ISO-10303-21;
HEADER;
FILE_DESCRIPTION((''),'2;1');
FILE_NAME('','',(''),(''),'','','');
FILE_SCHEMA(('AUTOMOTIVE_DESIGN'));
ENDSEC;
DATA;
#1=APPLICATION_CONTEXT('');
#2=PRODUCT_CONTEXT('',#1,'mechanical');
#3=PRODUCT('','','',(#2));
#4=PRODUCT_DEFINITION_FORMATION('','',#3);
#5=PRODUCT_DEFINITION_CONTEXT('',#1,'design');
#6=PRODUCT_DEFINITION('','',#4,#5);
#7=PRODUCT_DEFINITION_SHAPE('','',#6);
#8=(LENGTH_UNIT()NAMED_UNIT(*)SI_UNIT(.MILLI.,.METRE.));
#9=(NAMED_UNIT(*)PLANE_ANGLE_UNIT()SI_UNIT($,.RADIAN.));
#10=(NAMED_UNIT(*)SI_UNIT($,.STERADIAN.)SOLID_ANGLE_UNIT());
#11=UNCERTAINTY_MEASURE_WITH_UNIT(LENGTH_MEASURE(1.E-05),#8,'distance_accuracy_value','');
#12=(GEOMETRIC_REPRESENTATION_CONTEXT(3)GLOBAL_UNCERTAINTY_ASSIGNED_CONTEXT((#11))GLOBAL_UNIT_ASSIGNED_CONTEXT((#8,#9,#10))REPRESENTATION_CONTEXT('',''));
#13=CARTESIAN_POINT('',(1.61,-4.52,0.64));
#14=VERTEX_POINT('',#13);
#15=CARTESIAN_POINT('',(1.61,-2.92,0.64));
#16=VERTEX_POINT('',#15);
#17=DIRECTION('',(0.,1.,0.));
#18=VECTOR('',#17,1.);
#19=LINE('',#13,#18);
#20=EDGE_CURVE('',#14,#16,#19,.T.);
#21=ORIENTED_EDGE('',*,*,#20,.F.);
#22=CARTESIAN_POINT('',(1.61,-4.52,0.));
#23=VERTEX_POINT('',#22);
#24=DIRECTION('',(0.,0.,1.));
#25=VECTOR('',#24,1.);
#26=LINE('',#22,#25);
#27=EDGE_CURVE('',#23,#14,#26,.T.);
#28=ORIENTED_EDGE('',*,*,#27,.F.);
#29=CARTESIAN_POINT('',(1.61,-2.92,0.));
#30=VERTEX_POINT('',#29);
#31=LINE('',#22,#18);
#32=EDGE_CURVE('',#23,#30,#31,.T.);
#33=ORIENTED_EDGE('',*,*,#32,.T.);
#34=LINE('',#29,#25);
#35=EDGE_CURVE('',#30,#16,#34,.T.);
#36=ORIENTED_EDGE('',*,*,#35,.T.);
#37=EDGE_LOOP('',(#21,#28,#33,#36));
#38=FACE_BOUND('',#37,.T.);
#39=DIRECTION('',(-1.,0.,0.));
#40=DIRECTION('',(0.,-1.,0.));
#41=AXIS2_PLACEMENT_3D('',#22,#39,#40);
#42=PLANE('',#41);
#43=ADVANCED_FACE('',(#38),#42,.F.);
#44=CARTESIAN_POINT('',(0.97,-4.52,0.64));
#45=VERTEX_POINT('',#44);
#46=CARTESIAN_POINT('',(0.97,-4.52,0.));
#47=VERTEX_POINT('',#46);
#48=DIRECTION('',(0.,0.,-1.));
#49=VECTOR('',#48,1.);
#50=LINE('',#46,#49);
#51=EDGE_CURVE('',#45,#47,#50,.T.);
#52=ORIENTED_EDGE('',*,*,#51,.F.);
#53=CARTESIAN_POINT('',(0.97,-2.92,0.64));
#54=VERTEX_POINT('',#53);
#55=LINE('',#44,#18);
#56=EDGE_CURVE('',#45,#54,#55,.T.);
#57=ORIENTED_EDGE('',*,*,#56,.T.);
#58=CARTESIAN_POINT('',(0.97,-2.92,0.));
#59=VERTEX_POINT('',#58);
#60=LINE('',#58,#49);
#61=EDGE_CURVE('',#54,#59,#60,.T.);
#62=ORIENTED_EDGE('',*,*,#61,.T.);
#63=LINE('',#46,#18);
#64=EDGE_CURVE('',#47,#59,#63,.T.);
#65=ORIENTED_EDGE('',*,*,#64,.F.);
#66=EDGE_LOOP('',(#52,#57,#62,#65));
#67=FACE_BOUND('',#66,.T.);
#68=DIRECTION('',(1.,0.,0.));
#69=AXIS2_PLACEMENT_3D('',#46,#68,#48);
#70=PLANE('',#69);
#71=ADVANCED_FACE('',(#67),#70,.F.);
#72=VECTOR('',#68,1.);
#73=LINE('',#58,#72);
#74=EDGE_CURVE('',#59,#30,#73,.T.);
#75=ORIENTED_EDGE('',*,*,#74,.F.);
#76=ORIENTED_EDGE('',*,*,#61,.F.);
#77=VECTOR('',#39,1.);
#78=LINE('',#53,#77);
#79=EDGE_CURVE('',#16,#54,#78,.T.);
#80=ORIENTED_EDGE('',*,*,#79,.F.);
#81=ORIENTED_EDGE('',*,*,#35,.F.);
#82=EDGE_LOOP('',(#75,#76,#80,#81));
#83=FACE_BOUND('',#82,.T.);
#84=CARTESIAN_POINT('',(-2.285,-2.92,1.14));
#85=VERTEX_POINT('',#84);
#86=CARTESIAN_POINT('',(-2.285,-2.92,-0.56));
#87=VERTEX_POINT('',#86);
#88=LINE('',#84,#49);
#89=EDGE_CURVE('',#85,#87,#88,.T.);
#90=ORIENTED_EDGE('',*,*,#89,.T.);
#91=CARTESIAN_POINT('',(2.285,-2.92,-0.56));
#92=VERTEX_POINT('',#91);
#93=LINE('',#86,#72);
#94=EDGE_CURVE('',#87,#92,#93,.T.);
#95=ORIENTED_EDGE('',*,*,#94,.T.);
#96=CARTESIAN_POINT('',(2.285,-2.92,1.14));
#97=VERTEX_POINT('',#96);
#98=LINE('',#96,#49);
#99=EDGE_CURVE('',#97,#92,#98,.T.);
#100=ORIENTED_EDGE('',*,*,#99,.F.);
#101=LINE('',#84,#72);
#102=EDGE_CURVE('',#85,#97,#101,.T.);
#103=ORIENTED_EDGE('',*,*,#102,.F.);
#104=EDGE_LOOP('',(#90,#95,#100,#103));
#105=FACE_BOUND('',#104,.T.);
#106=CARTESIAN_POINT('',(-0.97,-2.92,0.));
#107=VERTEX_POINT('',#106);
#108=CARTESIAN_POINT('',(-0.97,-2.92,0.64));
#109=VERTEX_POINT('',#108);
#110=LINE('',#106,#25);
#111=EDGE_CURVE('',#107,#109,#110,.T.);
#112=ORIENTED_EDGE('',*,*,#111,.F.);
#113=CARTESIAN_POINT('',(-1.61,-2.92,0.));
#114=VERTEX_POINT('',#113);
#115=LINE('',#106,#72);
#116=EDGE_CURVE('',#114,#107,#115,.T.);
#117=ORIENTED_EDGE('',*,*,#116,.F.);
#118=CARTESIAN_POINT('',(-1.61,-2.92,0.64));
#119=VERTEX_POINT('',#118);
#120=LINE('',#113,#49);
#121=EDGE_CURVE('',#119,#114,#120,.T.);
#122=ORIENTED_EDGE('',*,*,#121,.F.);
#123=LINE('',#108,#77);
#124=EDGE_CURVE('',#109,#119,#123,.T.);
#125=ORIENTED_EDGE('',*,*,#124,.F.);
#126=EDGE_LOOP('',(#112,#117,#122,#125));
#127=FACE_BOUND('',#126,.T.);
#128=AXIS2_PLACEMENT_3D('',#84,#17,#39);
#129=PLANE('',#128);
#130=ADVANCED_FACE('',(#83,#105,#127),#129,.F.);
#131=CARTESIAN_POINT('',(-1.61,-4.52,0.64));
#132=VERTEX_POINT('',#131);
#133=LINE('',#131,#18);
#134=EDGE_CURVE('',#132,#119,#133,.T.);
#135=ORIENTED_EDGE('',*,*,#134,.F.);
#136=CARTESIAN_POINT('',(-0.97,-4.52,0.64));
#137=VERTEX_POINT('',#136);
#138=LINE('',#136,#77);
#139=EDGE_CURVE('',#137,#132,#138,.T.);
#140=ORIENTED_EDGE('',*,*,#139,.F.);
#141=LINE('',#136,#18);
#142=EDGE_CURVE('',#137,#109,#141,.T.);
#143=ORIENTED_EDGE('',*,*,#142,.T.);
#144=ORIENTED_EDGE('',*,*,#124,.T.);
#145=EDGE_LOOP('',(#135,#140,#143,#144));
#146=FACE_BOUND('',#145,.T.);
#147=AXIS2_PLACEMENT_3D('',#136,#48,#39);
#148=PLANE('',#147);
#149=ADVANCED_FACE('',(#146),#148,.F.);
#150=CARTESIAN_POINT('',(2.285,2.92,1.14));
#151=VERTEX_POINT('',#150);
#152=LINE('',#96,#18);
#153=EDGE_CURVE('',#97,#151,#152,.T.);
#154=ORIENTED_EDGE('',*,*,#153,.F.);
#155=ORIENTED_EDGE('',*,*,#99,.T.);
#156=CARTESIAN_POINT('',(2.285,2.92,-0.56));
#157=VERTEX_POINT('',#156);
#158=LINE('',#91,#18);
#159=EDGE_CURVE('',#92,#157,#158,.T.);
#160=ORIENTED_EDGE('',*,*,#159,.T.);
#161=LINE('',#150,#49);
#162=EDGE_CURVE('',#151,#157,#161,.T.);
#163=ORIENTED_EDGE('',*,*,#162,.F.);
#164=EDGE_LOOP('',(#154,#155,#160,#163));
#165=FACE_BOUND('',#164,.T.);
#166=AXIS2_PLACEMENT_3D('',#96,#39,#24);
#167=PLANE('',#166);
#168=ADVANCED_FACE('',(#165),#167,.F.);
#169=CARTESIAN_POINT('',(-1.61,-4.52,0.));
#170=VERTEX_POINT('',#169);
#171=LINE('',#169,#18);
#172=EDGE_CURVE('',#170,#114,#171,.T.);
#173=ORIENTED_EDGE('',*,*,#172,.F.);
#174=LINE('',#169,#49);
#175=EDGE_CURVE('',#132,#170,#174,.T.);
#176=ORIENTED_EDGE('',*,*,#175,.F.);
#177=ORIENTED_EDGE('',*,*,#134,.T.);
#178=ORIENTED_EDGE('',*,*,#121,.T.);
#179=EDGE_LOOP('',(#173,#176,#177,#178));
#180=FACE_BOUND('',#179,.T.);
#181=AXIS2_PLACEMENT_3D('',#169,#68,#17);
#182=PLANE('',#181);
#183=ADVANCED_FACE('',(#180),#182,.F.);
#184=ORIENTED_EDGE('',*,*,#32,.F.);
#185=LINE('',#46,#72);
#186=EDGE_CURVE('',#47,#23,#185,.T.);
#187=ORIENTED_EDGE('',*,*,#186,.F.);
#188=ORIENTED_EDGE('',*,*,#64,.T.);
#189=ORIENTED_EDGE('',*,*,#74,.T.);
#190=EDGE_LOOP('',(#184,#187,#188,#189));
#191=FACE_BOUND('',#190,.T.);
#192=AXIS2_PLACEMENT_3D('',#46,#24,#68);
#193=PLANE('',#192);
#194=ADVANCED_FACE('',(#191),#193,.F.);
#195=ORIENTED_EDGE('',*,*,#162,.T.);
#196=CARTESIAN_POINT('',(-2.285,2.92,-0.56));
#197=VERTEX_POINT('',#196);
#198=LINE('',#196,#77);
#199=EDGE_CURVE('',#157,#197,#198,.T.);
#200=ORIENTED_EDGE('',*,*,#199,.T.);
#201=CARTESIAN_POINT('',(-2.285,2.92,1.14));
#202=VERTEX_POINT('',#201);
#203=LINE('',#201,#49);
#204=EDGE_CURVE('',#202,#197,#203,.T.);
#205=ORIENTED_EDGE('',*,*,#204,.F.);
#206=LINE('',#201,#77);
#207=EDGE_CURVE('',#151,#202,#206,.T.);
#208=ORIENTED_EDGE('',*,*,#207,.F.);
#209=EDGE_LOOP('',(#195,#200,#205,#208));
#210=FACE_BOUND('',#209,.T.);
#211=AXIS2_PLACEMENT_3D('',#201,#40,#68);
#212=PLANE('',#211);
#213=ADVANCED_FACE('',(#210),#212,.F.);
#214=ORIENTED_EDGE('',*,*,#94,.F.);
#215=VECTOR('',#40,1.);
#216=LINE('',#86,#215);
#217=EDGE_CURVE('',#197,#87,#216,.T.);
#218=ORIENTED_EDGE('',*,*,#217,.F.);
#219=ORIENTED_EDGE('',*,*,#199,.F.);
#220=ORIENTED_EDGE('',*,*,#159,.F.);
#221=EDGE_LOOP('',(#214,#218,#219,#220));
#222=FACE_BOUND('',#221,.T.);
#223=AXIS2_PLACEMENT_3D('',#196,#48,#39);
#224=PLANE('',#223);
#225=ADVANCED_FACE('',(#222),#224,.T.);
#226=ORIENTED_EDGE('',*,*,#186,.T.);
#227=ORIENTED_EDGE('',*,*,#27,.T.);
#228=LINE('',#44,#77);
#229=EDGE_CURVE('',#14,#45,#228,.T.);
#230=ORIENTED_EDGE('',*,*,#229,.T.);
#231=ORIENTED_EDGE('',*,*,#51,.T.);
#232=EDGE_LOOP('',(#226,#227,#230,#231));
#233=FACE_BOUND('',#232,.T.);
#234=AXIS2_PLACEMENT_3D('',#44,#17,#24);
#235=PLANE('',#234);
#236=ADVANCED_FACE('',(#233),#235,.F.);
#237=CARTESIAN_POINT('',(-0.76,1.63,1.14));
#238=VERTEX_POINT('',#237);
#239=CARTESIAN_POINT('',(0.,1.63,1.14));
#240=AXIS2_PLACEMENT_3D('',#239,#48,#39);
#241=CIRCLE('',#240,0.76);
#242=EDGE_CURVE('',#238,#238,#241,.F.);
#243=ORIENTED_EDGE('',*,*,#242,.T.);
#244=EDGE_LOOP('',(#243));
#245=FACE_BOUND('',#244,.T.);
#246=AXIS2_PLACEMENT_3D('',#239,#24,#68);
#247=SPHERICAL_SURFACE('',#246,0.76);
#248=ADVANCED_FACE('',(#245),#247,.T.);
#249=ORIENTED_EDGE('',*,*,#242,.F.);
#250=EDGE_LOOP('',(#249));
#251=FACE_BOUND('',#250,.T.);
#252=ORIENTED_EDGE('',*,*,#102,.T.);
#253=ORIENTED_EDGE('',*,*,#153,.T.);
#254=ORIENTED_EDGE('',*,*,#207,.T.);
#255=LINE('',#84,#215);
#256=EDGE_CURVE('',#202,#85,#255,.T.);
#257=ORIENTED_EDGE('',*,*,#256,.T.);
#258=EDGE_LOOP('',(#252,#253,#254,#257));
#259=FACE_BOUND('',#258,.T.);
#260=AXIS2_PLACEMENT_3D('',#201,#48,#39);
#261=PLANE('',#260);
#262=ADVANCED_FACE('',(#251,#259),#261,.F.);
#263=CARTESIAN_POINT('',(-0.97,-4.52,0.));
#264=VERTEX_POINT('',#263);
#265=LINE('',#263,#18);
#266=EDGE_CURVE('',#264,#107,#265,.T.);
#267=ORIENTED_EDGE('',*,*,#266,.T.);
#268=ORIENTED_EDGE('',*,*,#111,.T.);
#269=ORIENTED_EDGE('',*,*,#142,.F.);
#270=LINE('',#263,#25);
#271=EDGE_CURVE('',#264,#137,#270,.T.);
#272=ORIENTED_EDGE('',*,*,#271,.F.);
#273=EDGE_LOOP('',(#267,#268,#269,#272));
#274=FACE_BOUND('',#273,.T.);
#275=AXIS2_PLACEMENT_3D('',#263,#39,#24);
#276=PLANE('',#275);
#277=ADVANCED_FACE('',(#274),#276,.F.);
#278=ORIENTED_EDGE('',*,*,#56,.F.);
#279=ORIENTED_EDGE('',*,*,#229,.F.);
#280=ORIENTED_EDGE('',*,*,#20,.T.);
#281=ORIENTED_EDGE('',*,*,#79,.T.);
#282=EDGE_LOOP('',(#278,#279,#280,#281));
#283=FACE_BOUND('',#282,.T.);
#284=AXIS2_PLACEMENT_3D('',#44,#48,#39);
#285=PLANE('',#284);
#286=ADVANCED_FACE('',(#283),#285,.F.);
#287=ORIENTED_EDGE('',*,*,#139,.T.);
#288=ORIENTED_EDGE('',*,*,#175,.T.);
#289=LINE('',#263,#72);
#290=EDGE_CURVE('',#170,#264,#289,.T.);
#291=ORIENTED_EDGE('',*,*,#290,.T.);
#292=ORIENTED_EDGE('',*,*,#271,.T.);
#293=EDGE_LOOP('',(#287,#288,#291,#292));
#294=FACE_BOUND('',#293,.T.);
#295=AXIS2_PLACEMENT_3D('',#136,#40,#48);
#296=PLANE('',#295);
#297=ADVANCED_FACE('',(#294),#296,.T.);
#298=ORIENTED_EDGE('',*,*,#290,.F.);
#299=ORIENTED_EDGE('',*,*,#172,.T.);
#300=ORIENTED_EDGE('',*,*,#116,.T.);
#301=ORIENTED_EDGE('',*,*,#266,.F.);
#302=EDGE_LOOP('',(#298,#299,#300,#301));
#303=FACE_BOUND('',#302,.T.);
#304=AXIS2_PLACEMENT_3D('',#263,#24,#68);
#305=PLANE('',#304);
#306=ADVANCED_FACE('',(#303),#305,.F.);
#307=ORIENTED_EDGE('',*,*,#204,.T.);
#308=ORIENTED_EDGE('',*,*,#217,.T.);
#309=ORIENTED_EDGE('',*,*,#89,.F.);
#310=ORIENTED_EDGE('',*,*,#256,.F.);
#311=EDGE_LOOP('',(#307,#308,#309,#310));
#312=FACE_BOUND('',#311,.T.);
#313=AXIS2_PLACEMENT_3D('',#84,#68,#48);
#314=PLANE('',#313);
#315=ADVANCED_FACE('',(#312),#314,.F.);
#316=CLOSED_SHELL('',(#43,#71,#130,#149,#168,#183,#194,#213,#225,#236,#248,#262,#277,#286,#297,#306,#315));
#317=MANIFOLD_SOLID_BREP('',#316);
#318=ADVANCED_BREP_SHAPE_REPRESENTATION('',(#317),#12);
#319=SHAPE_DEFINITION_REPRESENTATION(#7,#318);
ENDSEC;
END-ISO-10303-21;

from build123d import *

# Parameters (mm, degrees)
BOSS_EXTRUDE1_DEPTH      = 1.14
BOSS_EXTRUDE1_DEPTH_BACK = 0.56
SKETCH2_W                = 4.57
SKETCH2_H                = 5.84
SKETCH3_R                = 0.76
BOSS_EXTRUDE2_DEPTH      = 0.76
FILLET1_R                = 0.76
SKETCH4_W                = 0.64
SKETCH4_H                = 0.64
BOSS_EXTRUDE3_DEPTH      = 1.6
SKETCH5_W                = 0.64
SKETCH5_H                = 0.64
BOSS_EXTRUDE4_DEPTH      = 1.6


with BuildPart() as part:
    # Sketch2 → Boss-Extrude1 (new, two sides: drawn at the far end of the back side and taken through both)
    with BuildSketch(Plane.XY.offset(-BOSS_EXTRUDE1_DEPTH_BACK)):
        Rectangle(SKETCH2_W, SKETCH2_H)
    extrude(amount=BOSS_EXTRUDE1_DEPTH + BOSS_EXTRUDE1_DEPTH_BACK)

    # Sketch3 → Boss-Extrude2 (add)
    with BuildSketch(Plane.XY.offset(1.14)):
        with Locations(Location((0, 1.63, 0), (0, 0, 180))):
            Circle(SKETCH3_R)
    extrude(amount=BOSS_EXTRUDE2_DEPTH)

    # Fillet1
    fillet1_edges = [part.edges().sort_by_distance(p)[0] for p in [
        (0.76, 1.63, 1.9),
    ]]
    fillet(fillet1_edges, radius=FILLET1_R - 0.0001)  # a hair under: the kernel refuses the full size

    # Sketch4 → Boss-Extrude3 (add)
    with BuildSketch(Plane.XZ.offset(2.92)):
        with Locations((1.29, 0.32)):
            Rectangle(SKETCH4_W, SKETCH4_H)
    extrude(amount=BOSS_EXTRUDE3_DEPTH)

    # Sketch5 → Boss-Extrude4 (add)
    with BuildSketch(Plane.XZ.offset(2.92)):
        with Locations((-1.29, 0.32)):
            Rectangle(SKETCH5_W, SKETCH5_H)
    extrude(amount=BOSS_EXTRUDE4_DEPTH)


solid = part.part
